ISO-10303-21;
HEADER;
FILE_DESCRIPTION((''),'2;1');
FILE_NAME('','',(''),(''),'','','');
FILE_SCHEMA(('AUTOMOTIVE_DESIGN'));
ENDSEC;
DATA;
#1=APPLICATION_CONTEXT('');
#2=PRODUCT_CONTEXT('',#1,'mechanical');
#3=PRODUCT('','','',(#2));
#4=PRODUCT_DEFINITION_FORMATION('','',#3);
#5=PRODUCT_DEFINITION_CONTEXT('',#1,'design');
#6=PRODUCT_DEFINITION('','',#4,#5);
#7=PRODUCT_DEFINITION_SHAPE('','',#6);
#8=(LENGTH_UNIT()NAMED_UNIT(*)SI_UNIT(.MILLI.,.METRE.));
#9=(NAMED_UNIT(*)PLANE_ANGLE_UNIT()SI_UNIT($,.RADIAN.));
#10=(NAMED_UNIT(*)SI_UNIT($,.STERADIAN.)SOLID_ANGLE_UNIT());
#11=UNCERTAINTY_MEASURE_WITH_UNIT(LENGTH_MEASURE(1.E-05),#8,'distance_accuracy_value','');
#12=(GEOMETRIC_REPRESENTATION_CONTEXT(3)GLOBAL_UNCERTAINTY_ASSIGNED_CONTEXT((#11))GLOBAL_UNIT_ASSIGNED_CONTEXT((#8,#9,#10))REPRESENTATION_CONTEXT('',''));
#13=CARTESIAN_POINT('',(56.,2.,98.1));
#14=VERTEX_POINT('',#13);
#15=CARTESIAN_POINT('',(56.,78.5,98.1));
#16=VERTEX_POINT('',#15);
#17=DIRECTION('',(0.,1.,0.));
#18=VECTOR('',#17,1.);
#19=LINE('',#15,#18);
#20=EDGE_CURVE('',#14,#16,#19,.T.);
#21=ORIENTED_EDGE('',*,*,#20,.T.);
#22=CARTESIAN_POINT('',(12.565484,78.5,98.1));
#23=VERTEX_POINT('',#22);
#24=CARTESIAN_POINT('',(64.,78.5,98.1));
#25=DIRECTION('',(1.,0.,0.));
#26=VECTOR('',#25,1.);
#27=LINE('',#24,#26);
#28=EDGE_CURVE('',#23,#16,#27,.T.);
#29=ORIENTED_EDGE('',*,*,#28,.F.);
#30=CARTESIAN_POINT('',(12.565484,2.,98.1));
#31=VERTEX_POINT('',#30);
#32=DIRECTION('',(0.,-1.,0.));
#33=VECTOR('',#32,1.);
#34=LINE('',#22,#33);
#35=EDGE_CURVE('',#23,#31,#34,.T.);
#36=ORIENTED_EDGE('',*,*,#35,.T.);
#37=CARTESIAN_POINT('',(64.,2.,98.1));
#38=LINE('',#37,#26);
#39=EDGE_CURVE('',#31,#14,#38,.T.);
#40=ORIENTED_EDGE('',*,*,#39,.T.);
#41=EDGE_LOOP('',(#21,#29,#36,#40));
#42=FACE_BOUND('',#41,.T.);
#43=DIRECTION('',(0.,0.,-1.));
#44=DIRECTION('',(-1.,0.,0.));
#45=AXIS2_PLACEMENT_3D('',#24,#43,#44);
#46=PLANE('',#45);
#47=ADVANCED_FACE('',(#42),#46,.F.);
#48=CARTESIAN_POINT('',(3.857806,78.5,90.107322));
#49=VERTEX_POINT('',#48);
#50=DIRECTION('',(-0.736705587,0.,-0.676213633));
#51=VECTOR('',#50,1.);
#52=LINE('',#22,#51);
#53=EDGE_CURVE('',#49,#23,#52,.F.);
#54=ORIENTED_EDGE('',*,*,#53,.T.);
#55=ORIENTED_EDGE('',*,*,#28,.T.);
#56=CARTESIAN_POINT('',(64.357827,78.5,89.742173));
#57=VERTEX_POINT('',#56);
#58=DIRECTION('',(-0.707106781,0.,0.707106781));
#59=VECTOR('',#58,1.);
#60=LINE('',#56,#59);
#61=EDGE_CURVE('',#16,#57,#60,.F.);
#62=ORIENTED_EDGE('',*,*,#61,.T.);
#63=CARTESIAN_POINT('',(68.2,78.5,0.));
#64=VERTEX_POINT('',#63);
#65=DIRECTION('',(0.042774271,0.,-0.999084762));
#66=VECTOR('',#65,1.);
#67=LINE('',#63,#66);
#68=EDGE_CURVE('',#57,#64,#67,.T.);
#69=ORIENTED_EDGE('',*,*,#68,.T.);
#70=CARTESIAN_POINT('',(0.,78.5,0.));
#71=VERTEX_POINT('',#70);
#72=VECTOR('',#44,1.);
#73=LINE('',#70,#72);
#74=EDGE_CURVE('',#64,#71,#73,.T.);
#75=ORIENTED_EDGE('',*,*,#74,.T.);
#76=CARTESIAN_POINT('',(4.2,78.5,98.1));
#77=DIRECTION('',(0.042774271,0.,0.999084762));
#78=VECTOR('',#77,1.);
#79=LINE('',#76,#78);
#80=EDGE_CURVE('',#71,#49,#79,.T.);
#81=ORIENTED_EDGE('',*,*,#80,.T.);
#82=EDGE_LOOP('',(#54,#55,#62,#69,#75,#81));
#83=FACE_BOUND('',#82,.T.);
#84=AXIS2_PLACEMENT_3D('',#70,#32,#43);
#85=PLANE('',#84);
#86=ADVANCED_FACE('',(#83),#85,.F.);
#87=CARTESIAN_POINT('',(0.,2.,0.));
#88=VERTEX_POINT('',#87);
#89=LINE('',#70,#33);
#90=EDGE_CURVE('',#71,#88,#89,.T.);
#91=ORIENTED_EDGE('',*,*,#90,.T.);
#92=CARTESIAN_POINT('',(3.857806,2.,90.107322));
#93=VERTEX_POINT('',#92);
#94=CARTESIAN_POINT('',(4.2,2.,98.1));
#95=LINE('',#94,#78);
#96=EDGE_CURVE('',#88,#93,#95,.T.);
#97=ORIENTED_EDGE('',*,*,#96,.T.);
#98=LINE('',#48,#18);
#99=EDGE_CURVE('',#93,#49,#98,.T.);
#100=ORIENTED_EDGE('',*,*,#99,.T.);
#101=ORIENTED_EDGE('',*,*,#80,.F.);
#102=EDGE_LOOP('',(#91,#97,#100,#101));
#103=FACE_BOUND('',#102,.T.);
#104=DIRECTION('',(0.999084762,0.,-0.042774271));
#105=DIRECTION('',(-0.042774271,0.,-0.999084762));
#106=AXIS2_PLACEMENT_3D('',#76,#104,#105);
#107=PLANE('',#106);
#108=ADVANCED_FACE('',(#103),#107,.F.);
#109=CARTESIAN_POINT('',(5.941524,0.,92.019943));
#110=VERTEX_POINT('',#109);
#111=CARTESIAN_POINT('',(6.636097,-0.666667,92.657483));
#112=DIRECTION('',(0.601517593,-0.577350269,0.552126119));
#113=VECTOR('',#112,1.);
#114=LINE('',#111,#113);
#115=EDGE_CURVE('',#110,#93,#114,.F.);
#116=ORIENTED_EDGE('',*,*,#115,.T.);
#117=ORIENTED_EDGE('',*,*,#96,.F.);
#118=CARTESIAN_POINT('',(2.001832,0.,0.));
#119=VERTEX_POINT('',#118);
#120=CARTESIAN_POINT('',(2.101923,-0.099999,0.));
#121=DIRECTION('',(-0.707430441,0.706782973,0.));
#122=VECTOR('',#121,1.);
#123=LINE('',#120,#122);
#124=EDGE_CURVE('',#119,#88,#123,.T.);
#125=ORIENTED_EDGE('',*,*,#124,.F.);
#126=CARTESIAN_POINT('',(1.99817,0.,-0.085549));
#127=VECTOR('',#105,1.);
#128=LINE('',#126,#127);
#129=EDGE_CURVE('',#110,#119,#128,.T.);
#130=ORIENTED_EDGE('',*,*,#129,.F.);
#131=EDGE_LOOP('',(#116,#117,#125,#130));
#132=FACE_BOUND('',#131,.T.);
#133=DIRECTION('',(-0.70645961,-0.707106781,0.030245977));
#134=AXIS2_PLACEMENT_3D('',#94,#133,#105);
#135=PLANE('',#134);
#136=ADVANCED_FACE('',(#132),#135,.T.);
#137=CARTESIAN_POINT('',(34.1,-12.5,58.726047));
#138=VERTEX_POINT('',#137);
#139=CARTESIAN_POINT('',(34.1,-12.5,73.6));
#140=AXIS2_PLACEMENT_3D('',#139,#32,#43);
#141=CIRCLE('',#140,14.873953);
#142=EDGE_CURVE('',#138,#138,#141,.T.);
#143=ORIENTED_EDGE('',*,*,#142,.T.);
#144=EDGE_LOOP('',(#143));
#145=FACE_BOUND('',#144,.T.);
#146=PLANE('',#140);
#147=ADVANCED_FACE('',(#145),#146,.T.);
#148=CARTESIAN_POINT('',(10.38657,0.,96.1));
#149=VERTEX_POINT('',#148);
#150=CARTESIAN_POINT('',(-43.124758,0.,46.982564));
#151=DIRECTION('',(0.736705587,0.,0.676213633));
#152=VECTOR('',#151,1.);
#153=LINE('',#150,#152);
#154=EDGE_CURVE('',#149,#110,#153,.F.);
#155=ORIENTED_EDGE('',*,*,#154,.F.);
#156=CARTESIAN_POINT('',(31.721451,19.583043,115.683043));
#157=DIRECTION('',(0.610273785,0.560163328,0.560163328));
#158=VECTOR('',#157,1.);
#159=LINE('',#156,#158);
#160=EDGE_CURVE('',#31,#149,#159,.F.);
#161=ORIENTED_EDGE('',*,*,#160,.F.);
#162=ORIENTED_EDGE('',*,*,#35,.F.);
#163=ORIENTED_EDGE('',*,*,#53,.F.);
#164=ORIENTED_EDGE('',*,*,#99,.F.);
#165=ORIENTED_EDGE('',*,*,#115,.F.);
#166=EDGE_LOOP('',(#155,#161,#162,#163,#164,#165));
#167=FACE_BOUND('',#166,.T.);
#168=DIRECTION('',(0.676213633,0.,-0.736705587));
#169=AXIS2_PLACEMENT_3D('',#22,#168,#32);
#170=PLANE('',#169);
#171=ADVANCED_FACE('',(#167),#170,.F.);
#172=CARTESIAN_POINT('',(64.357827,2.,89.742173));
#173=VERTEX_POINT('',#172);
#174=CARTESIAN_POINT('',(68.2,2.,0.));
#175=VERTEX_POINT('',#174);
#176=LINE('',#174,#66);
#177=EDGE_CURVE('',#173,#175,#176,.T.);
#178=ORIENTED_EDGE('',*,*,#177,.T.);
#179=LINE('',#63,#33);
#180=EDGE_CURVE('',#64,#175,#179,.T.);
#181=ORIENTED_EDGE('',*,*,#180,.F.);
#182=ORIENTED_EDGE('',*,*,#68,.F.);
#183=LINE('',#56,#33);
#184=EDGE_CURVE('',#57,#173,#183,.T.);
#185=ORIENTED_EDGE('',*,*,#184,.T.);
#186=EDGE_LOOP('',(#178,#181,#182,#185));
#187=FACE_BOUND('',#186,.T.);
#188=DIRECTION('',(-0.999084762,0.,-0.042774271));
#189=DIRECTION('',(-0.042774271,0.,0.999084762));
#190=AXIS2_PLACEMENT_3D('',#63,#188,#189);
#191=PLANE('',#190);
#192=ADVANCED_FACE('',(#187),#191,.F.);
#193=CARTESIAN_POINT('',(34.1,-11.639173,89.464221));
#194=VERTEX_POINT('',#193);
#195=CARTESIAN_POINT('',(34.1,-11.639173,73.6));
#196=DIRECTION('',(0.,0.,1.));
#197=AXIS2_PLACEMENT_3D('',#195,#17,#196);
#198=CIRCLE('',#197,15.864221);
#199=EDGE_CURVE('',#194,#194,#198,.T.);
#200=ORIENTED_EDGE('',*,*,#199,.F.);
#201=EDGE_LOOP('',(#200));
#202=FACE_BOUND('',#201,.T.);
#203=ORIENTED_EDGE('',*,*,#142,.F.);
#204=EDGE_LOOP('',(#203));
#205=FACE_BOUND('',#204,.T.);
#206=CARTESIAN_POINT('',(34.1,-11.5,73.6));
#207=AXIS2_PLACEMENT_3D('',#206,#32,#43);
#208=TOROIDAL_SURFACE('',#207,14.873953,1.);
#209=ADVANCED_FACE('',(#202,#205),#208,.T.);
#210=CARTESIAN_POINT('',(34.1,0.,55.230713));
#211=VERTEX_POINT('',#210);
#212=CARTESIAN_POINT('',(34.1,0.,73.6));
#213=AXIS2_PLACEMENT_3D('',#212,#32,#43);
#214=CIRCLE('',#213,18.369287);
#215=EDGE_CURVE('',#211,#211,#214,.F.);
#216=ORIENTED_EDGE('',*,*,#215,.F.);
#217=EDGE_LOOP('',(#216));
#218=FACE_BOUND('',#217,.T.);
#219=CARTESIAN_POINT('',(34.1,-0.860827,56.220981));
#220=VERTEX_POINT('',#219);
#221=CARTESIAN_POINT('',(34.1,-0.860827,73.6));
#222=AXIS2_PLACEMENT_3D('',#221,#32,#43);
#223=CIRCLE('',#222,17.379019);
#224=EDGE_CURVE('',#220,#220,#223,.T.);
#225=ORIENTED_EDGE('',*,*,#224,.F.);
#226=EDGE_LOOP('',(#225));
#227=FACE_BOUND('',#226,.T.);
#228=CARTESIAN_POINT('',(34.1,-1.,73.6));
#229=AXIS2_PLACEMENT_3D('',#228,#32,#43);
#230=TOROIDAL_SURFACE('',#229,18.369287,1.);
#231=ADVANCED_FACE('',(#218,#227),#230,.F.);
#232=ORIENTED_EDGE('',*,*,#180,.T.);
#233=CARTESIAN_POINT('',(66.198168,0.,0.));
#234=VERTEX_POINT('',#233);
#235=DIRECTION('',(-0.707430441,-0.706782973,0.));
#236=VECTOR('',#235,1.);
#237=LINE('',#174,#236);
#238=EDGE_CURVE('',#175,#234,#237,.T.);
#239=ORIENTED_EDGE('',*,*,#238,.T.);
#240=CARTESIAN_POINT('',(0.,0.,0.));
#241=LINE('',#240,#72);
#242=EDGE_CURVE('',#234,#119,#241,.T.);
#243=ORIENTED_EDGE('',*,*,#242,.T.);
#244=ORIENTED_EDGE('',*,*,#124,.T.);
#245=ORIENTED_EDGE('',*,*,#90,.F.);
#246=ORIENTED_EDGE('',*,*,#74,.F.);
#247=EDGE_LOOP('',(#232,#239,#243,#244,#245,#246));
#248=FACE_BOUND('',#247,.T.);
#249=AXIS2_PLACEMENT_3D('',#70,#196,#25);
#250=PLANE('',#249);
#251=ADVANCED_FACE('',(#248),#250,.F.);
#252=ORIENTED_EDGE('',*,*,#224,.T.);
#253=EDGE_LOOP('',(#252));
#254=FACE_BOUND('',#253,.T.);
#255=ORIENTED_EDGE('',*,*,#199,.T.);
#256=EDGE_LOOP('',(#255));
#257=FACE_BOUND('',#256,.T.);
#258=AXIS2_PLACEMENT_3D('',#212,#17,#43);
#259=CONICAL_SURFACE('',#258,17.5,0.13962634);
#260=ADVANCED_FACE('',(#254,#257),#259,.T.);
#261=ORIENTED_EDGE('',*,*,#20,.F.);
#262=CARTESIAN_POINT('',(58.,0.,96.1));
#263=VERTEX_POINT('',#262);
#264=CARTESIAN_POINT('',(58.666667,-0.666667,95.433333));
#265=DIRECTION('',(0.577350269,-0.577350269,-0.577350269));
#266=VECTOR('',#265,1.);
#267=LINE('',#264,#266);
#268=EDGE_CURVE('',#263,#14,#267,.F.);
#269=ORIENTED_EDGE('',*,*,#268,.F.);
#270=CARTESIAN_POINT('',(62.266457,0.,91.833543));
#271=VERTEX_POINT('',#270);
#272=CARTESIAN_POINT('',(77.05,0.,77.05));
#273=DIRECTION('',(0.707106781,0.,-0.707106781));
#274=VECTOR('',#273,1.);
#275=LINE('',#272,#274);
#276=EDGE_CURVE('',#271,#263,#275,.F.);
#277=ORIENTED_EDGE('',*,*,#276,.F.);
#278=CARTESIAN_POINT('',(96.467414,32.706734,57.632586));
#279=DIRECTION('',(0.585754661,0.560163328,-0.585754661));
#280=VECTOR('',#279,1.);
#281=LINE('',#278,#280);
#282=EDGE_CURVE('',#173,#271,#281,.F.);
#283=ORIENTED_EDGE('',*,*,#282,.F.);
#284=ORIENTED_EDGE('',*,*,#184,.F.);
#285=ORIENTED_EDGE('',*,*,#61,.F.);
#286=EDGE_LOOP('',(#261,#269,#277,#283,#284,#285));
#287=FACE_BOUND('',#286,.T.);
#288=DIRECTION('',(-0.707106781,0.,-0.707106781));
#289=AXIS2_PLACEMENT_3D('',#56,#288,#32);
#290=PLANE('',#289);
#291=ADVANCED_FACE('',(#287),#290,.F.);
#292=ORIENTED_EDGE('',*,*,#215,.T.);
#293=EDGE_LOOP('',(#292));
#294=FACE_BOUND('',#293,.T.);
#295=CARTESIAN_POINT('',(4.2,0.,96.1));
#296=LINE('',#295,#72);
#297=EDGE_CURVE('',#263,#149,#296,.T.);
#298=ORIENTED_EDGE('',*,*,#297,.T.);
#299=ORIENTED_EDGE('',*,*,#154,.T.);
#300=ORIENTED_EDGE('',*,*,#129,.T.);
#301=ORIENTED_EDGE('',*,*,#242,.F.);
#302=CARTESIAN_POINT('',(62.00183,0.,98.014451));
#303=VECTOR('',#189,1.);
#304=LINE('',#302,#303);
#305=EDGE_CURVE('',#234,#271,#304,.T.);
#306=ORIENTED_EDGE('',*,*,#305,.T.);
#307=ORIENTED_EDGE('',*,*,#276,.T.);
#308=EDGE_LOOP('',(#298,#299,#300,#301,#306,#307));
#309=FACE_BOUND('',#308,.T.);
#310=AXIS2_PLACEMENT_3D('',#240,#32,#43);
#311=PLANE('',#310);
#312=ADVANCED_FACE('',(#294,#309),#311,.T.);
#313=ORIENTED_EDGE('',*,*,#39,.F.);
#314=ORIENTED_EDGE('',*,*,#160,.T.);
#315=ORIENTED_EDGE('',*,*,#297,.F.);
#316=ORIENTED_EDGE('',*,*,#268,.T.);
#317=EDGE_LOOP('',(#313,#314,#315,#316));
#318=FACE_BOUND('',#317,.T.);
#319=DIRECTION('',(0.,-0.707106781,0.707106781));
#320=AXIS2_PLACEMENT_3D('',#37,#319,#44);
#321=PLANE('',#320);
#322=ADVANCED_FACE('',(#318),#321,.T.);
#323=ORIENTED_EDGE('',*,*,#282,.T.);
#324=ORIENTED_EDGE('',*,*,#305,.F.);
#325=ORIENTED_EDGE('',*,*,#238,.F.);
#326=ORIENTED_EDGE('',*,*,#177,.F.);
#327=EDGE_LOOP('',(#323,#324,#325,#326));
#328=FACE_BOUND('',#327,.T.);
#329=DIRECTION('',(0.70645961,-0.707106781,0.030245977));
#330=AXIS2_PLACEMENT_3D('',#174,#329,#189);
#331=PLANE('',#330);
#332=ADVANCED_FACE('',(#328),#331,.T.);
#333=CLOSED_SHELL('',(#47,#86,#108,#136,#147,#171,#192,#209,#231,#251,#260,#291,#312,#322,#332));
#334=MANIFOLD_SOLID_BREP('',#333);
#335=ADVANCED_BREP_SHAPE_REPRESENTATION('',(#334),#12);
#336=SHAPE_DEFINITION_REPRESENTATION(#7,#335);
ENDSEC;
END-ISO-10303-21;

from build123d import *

# Parameters (mm, degrees)
BOSS_EXTRUDE1_DEPTH = 78.5
SKETCH4_R           = 17.5
BOSS_EXTRUDE2_DEPTH = 12.5
BOSS_EXTRUDE2_TAPER = 8
FILLET1_R           = 1
FILLET2_R           = 1
CHAMFER1_SIZE       = 2
CHAMFER2_SIZE       = 8
CHAMFER2_SIZE_2     = 8.365483885


with BuildPart() as part:
    # Sketch1 → Boss-Extrude1 (new body)
    with BuildSketch(Plane(origin=(0, 0, 0), x_dir=(1, 0, 0), z_dir=(0, 1, 0))):
        Polygon((0, 0), (68.2, 0), (64, -98.1), (4.2, -98.1), align=None)
    extrude(amount=BOSS_EXTRUDE1_DEPTH)

    # Sketch4 → Boss-Extrude2 (add)
    with BuildSketch(Plane.XZ):
        with Locations((34.1, 73.6)):
            Circle(SKETCH4_R)
    extrude(amount=BOSS_EXTRUDE2_DEPTH, taper=BOSS_EXTRUDE2_TAPER)

    # Fillet1
    fillet1_edges = [part.edges().sort_by_distance(p)[0] for p in [
        (18.356760434, -12.5, 73.6),
    ]]
    fillet(fillet1_edges, radius=FILLET1_R)

    # Fillet2
    fillet2_edges = [part.edges().sort_by_distance(p)[0] for p in [
        (16.6, 0, 73.6),
    ]]
    fillet(fillet2_edges, radius=FILLET2_R)

    # Chamfer1
    chamfer1_edges = [part.edges().sort_by_distance(p)[0] for p in [
        (66.1, 0, 49.05),
        (34.1, 0, 98.1),
        (2.1, 0, 49.05),
    ]]
    chamfer(chamfer1_edges, length=CHAMFER1_SIZE)

    # Chamfer2
    # the kernel refuses this chamfer: 8.365483885, 8 mm, written as the material it takes off along each edge
    with BuildSketch(Plane(origin=(4.2, -19.537429792, 98.1), x_dir=(-0.07144532061930704, 0, -0.9974445178362575), z_dir=(0, 1, 0))) as chamfer2_piece_1:
        Polygon((CHAMFER2_SIZE * 0.999587640261, -CHAMFER2_SIZE * 0.028714968879), (-CHAMFER2_SIZE_2 * 0.071445320615, -CHAMFER2_SIZE_2 * 0.997444517777), (0, 0), align=None)
    extrude(amount=119.574859584, mode=Mode.SUBTRACT)
    with BuildSketch(Plane(origin=(64, -19.537429792, 98.1), x_dir=(0.06900069983757576, 0, -0.9976166114404496), z_dir=(0, 1, 0))) as chamfer2_piece_2:
        Polygon((CHAMFER2_SIZE_2 * 0.999655009427, CHAMFER2_SIZE_2 * 0.0262652243269), (-CHAMFER2_SIZE * 0.0690006998376, CHAMFER2_SIZE * 0.99761661144), (0, 0), align=None)
    extrude(amount=119.574859584, mode=Mode.SUBTRACT)


solid = part.part
